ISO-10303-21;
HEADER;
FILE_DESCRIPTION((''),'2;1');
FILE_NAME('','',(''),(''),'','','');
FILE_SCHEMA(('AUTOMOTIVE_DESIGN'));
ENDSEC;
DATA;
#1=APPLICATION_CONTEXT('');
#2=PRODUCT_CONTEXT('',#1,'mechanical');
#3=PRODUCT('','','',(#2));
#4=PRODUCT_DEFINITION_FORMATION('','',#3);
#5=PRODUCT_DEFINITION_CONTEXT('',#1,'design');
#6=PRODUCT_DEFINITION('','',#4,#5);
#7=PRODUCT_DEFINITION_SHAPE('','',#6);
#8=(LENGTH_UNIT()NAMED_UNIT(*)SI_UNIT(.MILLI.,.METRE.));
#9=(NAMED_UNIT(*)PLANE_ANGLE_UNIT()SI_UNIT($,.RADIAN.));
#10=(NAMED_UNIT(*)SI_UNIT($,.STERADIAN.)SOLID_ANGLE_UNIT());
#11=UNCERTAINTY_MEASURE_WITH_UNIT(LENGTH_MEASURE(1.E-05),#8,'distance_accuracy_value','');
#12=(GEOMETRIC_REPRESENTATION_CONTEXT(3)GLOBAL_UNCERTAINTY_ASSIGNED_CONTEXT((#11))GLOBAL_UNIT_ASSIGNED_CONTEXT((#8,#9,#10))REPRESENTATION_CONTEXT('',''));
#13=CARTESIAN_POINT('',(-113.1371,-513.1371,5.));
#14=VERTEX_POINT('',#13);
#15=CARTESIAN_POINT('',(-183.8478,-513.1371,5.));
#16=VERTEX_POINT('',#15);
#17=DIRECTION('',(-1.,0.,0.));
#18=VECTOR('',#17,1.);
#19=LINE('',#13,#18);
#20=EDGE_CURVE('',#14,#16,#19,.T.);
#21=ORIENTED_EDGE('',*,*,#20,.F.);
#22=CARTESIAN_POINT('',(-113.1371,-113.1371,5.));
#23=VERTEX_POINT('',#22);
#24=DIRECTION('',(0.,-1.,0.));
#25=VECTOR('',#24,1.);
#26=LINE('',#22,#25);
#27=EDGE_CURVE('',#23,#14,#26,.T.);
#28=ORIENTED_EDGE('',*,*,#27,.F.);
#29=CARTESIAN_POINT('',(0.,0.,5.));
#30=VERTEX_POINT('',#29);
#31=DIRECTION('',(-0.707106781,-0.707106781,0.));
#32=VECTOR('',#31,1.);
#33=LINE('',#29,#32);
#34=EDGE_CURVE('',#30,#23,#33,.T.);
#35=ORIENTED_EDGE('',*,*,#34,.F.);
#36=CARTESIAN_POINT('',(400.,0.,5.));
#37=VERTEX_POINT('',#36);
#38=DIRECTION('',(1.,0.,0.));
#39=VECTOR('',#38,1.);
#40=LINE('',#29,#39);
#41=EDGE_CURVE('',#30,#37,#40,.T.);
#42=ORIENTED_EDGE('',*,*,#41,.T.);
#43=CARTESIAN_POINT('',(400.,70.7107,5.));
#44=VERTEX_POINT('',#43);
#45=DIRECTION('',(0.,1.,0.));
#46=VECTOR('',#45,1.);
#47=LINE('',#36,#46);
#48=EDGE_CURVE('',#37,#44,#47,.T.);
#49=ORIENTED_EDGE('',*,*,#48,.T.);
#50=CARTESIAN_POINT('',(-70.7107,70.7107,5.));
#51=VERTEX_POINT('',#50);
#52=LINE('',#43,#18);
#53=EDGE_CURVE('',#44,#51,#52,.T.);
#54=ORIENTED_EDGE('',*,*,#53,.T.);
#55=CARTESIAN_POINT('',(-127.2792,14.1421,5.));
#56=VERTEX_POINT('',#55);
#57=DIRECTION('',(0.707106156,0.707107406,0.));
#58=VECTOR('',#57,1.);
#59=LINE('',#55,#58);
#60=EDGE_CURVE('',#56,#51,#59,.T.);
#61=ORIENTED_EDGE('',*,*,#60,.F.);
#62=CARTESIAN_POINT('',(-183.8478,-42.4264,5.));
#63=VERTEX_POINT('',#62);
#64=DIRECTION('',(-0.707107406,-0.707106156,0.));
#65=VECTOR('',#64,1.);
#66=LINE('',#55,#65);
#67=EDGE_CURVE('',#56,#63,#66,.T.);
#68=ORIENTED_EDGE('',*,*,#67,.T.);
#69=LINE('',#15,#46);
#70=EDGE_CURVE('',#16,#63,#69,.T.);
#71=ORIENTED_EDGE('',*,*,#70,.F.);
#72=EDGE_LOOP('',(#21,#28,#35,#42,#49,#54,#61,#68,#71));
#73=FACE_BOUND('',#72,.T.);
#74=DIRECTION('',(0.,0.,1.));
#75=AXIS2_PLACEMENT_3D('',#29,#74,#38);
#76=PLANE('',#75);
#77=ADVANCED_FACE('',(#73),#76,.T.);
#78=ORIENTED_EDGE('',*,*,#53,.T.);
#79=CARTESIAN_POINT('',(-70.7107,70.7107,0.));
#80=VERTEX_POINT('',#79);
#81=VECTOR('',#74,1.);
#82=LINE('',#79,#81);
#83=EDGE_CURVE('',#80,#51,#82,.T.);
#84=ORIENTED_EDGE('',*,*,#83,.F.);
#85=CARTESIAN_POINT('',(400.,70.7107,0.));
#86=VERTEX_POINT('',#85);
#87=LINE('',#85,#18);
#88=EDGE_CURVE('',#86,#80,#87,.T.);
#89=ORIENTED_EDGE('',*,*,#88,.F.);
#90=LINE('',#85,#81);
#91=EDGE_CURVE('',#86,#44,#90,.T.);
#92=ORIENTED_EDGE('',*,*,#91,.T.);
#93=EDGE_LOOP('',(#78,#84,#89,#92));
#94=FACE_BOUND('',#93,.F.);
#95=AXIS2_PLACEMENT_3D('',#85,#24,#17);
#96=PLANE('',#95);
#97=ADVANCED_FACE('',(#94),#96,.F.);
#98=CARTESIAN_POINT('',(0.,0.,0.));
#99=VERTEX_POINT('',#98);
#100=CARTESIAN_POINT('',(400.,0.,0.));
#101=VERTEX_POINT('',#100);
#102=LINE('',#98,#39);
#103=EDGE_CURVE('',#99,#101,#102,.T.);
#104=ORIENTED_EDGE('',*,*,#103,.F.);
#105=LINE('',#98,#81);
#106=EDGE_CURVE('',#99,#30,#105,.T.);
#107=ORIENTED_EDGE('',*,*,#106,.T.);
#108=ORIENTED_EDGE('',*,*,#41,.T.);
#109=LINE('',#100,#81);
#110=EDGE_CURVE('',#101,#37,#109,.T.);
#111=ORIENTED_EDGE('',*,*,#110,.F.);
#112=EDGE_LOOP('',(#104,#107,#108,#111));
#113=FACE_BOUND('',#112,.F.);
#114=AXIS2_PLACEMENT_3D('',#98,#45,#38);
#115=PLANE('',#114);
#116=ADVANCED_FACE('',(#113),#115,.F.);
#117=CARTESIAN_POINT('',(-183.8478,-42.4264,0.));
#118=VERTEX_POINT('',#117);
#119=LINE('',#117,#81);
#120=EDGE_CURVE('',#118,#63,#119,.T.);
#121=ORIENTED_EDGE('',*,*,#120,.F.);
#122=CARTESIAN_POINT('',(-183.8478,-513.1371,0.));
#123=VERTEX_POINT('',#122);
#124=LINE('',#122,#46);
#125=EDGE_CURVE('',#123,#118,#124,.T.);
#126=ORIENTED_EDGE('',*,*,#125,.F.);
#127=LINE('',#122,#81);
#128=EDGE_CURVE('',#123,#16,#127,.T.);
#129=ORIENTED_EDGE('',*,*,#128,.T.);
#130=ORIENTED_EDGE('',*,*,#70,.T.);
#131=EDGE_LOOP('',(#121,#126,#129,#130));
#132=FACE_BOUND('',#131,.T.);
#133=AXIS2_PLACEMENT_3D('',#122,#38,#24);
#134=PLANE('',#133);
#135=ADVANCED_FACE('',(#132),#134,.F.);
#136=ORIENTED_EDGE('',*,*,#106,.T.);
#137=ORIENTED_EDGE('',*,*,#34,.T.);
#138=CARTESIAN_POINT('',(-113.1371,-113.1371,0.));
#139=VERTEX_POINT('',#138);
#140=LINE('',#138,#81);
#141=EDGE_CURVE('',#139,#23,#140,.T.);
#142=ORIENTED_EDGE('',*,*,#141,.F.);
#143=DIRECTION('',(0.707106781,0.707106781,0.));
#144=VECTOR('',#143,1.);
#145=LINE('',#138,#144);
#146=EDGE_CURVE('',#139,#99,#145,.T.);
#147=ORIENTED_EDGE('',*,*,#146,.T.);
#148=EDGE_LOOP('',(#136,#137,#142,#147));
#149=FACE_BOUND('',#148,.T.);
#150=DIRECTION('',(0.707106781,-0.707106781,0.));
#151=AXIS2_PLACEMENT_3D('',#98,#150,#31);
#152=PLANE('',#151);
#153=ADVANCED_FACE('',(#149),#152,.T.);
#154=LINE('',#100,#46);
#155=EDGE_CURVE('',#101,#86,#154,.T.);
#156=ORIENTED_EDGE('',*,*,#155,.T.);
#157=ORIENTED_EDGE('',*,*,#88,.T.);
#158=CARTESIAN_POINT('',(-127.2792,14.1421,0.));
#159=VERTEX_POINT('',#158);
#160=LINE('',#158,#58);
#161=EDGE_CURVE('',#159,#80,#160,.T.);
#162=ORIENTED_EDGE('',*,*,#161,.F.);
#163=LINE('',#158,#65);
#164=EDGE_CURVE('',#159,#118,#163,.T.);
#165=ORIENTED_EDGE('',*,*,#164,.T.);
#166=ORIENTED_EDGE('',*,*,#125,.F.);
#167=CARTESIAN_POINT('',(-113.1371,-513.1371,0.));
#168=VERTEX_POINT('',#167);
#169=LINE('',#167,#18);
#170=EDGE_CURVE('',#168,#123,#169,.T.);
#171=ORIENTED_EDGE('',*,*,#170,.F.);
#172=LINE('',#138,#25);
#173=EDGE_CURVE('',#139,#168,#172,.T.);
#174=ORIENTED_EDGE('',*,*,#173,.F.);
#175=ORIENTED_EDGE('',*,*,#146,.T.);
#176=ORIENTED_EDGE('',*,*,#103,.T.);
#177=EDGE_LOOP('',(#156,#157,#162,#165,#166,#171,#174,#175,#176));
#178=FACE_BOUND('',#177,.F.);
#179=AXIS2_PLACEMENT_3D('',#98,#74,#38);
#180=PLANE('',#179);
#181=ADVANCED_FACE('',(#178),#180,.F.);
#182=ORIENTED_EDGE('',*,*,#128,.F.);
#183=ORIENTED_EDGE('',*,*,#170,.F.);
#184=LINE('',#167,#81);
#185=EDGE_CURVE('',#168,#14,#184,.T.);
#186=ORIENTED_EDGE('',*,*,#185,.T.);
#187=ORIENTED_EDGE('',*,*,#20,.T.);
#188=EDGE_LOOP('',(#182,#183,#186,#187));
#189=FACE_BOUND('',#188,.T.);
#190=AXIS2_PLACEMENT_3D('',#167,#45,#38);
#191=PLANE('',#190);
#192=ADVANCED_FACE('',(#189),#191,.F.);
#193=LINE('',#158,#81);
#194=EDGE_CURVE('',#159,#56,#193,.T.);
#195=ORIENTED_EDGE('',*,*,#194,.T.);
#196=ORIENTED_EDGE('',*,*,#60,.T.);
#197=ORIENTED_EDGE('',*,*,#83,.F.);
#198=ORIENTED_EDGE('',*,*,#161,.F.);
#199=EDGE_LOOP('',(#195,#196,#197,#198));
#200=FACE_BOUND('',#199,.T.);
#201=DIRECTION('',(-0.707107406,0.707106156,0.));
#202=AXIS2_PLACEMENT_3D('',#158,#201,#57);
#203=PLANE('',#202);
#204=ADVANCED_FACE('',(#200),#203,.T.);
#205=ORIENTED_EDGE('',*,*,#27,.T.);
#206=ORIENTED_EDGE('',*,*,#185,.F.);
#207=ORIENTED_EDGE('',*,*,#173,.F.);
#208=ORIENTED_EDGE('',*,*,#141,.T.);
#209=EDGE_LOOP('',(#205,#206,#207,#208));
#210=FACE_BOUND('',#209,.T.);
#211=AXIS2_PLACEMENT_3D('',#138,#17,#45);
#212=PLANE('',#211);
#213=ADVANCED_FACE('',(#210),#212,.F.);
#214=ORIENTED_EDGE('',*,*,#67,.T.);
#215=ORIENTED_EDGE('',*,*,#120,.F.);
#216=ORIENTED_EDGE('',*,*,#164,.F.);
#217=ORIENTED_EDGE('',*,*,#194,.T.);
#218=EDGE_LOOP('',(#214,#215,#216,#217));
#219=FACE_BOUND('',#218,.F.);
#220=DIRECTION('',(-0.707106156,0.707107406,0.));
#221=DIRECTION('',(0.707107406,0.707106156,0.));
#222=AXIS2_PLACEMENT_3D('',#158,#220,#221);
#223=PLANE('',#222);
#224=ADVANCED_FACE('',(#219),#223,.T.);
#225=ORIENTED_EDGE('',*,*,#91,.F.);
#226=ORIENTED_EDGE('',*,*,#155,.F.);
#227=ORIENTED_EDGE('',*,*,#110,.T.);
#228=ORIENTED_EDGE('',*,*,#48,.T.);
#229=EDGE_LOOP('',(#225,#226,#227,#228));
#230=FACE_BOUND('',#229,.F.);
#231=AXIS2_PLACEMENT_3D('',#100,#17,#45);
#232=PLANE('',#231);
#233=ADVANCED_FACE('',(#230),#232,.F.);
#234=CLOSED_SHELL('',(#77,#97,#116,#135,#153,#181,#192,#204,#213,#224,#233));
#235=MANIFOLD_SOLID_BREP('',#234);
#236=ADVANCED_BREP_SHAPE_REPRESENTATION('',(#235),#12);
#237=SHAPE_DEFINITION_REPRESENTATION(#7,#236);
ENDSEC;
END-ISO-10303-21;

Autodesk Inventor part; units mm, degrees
ref_plane "YZ Plane" through (0, 0, 0) normal (1, 0, 0) x (0, 1, 0)
ref_plane "XZ Plane" through (0, 0, 0) normal (0, 1, 0) x (-1, 0, 0)
ref_plane "XY Plane" through (0, 0, 0) normal (0, 0, 1) x (1, 0, 0)
sketch "Sketch1" plane through (0, 0, 0) normal (0, 0, 1) x (1, 0, 0)
  line L0 (0, 0) -> (400, 0)
  line L1 (400, 0) -> (400, 70.7107)
  line L2 (400, 70.7107) -> (-70.7107, 70.7107)
  line L3 (-70.7107, 70.7107) -> (0, 0) construction
  line L4 (0, 0) -> (-56.5685, -56.5685)
  line L5 (-56.5685, -56.5685) -> (-127.2792, 14.1421)
  line L6 (-127.2792, 14.1421) -> (-70.7107, 70.7107)
  dimension "d0" = 400
  dimension "d2" = 135
  dimension "d3" = 80
  dimension "d6" = 100
extrude "Extrusion1" add sketch "Sketch1" along normal blind 5
mirror "Mirror1" about plane through (-127.2792, 14.1421, 0) normal (-0.7071068, -0.7071068, 0)
properties part number "leg" material "Plywood, Finish"
